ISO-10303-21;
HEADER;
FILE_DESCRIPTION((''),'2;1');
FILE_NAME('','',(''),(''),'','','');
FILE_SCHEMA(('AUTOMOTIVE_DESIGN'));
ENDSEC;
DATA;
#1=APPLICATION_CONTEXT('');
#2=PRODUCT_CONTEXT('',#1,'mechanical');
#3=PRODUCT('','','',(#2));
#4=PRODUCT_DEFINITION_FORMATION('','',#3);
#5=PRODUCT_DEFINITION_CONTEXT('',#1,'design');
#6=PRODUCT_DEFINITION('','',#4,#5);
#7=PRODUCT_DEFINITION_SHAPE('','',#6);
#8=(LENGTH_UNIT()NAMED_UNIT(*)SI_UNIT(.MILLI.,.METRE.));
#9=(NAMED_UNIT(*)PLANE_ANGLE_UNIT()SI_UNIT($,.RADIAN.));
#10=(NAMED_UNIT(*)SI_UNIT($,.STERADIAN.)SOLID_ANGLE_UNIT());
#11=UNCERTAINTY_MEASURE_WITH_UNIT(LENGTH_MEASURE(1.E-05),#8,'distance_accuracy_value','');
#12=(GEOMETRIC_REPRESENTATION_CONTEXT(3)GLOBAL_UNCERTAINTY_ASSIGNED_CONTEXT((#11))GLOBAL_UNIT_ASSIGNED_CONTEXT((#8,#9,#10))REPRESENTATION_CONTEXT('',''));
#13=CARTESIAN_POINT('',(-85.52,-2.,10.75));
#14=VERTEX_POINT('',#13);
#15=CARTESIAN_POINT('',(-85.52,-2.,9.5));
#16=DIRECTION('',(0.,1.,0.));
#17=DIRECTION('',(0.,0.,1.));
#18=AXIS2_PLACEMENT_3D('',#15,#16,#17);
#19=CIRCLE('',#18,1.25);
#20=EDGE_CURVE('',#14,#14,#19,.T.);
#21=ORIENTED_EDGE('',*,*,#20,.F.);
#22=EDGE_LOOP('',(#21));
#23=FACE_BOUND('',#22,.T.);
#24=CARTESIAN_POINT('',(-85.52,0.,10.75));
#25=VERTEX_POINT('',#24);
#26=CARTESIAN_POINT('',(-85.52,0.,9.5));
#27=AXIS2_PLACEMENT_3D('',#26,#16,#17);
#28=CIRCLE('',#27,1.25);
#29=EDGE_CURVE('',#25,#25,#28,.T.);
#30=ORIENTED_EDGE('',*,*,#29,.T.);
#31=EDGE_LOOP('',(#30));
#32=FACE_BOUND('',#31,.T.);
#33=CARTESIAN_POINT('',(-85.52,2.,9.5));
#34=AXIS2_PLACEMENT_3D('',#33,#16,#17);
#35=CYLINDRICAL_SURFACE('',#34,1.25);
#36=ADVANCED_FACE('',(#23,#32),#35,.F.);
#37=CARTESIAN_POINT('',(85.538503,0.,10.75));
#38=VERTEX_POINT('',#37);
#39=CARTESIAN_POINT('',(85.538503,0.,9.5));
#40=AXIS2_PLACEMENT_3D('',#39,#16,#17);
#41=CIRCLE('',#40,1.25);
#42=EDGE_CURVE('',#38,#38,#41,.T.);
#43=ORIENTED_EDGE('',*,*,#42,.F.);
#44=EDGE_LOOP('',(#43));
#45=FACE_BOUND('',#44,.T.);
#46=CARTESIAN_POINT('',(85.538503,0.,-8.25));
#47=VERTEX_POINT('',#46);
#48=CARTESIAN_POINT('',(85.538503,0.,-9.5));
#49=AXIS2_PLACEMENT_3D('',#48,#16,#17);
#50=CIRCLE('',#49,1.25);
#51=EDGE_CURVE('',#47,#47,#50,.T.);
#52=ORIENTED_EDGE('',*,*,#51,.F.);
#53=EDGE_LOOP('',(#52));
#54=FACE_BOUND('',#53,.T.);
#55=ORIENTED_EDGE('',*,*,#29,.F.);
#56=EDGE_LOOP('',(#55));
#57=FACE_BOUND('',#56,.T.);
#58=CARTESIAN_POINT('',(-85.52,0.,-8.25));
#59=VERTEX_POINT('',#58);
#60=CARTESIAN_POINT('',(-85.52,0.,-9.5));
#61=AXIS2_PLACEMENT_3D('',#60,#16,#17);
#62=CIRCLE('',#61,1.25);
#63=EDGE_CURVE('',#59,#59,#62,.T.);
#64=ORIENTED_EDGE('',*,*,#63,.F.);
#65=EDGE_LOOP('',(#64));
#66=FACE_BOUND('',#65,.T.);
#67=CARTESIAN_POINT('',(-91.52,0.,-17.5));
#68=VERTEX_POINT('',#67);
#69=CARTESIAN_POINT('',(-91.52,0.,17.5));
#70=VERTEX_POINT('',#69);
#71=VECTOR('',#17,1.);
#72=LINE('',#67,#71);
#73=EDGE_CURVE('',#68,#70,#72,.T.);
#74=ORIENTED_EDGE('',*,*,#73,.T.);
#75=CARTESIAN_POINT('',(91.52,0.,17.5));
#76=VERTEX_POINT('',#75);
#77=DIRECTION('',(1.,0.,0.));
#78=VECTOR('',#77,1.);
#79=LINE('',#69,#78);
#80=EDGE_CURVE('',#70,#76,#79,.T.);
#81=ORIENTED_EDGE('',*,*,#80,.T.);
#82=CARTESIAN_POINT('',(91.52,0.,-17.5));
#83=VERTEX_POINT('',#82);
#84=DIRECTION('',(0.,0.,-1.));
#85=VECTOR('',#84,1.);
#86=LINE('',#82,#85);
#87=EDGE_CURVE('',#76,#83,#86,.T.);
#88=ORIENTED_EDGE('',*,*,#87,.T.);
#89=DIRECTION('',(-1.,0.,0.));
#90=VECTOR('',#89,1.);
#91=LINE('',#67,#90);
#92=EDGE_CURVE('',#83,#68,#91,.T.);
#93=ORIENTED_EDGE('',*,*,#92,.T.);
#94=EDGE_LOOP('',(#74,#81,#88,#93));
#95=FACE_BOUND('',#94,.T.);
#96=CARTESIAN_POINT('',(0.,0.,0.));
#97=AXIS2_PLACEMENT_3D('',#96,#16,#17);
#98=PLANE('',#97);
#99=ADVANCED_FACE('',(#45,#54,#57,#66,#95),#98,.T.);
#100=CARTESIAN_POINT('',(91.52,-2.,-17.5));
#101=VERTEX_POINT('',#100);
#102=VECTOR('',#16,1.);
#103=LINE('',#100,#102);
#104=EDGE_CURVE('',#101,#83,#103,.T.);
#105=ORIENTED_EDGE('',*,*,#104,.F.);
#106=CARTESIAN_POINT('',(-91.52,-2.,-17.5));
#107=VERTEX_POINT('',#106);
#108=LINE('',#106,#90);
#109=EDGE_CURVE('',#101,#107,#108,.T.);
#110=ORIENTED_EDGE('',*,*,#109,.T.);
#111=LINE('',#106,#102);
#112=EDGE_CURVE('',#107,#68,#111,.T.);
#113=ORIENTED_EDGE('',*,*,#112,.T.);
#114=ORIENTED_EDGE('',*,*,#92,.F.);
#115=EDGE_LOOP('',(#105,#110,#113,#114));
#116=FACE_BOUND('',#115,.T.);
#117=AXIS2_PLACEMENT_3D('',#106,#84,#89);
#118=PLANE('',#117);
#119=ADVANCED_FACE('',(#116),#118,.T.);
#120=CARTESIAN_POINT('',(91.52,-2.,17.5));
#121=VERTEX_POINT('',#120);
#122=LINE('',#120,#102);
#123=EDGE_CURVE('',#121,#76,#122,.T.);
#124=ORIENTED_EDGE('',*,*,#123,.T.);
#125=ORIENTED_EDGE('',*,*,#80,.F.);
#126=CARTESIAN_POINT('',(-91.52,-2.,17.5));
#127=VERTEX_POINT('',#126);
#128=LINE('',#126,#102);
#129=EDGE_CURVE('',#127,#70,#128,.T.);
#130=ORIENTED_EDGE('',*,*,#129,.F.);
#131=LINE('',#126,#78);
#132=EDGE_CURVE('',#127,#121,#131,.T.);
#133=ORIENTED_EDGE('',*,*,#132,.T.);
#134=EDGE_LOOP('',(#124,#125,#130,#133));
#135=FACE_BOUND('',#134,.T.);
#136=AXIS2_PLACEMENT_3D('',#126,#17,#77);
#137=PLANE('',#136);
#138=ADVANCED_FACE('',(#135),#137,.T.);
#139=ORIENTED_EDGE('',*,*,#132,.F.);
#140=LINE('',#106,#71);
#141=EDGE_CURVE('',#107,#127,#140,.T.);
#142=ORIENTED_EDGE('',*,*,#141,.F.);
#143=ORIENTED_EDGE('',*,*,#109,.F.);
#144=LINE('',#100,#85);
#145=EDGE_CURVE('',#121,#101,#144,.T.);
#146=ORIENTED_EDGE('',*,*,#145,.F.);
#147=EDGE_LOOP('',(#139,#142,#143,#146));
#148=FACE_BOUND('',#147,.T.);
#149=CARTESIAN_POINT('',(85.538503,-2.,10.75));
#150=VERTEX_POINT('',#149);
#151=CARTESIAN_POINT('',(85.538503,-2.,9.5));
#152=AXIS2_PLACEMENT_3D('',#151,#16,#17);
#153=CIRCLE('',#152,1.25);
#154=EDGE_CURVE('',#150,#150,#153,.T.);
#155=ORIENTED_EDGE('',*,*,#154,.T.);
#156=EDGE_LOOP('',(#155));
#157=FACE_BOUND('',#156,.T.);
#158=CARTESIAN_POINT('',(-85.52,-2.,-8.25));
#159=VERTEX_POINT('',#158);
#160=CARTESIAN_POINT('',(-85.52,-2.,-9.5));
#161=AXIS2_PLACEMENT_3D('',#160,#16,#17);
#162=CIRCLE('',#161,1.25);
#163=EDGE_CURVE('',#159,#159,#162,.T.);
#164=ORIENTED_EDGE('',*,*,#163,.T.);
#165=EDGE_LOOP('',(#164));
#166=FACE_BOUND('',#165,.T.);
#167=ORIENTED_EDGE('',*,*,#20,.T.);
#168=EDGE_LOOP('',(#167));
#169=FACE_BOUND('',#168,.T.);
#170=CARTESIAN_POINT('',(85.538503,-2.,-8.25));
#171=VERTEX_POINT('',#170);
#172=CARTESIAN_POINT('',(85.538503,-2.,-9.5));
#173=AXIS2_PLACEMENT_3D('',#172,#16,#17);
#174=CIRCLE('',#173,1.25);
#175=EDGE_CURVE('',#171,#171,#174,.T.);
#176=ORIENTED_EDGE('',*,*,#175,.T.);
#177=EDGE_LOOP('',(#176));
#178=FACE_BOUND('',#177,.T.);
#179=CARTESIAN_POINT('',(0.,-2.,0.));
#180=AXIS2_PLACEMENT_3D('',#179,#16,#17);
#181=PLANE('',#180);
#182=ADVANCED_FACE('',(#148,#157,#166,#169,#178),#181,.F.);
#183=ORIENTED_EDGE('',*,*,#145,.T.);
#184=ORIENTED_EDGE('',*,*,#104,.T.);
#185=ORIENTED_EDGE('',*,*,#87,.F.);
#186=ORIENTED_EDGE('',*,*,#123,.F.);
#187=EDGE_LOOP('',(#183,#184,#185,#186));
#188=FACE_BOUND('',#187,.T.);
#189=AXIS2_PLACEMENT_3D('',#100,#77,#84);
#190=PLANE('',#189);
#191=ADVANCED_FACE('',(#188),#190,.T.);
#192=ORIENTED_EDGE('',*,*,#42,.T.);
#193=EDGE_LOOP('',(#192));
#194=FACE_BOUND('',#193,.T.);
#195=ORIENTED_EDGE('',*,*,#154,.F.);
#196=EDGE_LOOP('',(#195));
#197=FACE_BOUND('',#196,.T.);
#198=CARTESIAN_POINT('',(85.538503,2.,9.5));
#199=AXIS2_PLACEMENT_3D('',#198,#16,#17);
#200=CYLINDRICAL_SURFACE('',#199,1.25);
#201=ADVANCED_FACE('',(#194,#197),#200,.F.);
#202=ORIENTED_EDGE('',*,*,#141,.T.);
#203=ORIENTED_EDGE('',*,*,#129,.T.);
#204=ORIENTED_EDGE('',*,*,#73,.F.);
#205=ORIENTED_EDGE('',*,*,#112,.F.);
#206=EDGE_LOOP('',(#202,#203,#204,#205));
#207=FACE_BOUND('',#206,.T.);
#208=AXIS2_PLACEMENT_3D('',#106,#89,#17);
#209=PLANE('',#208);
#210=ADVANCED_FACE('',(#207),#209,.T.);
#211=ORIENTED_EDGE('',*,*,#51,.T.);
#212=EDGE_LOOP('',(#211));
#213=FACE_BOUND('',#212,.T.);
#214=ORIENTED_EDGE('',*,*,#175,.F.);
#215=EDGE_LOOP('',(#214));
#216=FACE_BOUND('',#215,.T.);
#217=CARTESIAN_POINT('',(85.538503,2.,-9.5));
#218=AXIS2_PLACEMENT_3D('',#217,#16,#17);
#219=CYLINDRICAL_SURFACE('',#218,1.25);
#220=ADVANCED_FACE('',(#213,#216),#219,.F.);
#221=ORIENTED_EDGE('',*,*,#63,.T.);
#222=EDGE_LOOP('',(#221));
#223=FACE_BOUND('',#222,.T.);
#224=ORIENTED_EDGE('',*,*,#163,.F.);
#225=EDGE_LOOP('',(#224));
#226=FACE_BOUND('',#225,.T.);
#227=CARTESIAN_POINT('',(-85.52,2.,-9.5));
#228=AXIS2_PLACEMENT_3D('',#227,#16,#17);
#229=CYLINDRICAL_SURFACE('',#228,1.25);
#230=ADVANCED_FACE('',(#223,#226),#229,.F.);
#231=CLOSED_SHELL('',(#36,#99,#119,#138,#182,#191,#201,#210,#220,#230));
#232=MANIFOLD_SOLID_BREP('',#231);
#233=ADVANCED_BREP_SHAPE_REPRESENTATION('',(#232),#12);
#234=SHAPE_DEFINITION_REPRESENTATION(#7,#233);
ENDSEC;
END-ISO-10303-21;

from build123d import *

# Parameters (mm, degrees)
SKETCH1_W               = 183.04
SKETCH1_H               = 35
BASE_FLANGE1_DEPTH      = 2
TAP_DRILL_FOR_M3_TAP1_D = 2.5
TAP_DRILL_FOR_M3_TAP2_D = 2.5


# Sheet-metal steps are written as plain solids
with BuildPart() as part:
    # Sketch1 → Base-Flange1 (new body)
    with BuildSketch(Plane(origin=(0, 0, 0), x_dir=(1, 0, 0), z_dir=(0, 1, 0))):
        Rectangle(SKETCH1_W, SKETCH1_H)
    extrude(amount=-BASE_FLANGE1_DEPTH)

    # Tap Drill for M3 Tap1 (through all)
    with Locations(Plane(origin=(-65.865910354, 2, 15.830402425), x_dir=(0, 0, -1), z_dir=(0, 1, 0))):
        with Locations((25.330402425, 19.654089646), (6.330402425, 19.654089646)):
            Hole(TAP_DRILL_FOR_M3_TAP1_D / 2)

    # Tap Drill for M3 Tap2 (through all)
    with Locations(Plane(origin=(-65.865910354, 2, 15.830402425), x_dir=(0, 0, -1), z_dir=(0, 1, 0))):
        with Locations((25.330402425, -151.404413252), (6.330402425, -151.404413252)):
            Hole(TAP_DRILL_FOR_M3_TAP2_D / 2)


solid = part.part
